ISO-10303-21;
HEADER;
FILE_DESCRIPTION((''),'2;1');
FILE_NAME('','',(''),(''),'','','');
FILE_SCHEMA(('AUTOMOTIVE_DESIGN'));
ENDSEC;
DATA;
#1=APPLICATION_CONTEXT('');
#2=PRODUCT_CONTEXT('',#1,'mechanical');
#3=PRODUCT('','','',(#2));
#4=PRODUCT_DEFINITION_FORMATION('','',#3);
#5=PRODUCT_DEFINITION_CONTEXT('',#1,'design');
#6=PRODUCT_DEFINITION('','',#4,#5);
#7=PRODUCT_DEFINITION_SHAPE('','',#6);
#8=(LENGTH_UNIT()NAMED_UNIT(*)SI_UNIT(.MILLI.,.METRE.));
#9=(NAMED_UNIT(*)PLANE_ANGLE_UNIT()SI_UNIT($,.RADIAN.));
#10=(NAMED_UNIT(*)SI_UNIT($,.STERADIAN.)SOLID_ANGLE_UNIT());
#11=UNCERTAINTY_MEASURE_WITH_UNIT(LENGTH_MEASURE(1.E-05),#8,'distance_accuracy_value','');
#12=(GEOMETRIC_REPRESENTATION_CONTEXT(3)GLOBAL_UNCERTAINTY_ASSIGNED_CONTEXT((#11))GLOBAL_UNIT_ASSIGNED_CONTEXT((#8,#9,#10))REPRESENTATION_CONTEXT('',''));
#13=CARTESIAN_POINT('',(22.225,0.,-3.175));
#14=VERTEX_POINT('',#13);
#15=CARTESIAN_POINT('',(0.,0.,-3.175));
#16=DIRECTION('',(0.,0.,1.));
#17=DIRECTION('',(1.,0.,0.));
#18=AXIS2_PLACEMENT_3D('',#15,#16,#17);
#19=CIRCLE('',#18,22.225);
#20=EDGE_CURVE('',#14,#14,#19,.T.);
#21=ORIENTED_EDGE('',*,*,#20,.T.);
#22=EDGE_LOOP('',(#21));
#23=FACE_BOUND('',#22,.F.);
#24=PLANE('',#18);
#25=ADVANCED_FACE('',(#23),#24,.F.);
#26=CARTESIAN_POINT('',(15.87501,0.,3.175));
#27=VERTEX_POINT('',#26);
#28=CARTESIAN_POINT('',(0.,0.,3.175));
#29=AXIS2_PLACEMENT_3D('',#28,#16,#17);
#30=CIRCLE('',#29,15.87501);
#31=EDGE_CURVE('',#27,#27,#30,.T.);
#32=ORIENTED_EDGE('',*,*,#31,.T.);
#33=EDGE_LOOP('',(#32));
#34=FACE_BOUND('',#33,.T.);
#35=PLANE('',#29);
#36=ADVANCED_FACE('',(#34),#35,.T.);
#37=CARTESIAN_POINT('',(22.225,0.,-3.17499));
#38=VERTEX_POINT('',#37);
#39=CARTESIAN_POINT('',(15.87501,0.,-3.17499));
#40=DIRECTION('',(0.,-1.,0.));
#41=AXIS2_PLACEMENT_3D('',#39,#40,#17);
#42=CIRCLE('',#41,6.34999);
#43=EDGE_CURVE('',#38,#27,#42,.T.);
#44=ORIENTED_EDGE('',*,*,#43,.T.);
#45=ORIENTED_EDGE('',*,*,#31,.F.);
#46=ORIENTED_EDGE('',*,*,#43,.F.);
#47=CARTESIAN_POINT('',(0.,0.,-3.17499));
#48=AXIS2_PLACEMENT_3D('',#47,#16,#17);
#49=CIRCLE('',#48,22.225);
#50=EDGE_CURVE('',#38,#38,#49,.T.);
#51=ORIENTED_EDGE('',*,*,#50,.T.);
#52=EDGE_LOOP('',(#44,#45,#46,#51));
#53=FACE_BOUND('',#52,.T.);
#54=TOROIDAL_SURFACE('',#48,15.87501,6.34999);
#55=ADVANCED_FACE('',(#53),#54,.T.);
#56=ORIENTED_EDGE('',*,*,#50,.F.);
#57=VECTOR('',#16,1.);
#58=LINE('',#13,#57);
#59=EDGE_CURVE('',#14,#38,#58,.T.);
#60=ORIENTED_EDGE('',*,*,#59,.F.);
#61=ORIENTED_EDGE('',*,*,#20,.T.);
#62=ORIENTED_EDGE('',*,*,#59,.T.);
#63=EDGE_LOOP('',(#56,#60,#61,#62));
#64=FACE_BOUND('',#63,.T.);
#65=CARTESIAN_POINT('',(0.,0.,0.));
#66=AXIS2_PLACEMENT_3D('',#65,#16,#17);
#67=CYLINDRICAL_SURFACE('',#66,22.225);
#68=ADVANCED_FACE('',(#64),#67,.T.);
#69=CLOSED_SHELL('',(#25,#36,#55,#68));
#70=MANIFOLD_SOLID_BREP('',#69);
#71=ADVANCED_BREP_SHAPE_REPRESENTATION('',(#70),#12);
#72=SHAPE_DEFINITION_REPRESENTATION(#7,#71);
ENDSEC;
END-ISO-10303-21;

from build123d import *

# Parameters (mm, degrees)
F0_R     = 22.225
F1_DEPTH = 3.175
F2_R     = 6.34999


# Not quite as in the source:
# - a fillet or chamfer is up to 0.001 mm smaller than in the source, because OpenCascade refuses the exact size


with BuildPart() as f1:
    # F0 (on Top) → F1 (new body, symmetric)
    with BuildSketch(Plane.XY):
        Circle(F0_R)
    extrude(amount=F1_DEPTH, both=True)

    # F2 (radius 6.35 in the source; OpenCascade refuses exactly that, so slightly less here)
    f2_edges = [f1.edges().sort_by_distance(p)[0] for p in [
        (-22.225, 0, 3.175),
    ]]
    fillet(f2_edges, radius=F2_R)


solid = f1.part
